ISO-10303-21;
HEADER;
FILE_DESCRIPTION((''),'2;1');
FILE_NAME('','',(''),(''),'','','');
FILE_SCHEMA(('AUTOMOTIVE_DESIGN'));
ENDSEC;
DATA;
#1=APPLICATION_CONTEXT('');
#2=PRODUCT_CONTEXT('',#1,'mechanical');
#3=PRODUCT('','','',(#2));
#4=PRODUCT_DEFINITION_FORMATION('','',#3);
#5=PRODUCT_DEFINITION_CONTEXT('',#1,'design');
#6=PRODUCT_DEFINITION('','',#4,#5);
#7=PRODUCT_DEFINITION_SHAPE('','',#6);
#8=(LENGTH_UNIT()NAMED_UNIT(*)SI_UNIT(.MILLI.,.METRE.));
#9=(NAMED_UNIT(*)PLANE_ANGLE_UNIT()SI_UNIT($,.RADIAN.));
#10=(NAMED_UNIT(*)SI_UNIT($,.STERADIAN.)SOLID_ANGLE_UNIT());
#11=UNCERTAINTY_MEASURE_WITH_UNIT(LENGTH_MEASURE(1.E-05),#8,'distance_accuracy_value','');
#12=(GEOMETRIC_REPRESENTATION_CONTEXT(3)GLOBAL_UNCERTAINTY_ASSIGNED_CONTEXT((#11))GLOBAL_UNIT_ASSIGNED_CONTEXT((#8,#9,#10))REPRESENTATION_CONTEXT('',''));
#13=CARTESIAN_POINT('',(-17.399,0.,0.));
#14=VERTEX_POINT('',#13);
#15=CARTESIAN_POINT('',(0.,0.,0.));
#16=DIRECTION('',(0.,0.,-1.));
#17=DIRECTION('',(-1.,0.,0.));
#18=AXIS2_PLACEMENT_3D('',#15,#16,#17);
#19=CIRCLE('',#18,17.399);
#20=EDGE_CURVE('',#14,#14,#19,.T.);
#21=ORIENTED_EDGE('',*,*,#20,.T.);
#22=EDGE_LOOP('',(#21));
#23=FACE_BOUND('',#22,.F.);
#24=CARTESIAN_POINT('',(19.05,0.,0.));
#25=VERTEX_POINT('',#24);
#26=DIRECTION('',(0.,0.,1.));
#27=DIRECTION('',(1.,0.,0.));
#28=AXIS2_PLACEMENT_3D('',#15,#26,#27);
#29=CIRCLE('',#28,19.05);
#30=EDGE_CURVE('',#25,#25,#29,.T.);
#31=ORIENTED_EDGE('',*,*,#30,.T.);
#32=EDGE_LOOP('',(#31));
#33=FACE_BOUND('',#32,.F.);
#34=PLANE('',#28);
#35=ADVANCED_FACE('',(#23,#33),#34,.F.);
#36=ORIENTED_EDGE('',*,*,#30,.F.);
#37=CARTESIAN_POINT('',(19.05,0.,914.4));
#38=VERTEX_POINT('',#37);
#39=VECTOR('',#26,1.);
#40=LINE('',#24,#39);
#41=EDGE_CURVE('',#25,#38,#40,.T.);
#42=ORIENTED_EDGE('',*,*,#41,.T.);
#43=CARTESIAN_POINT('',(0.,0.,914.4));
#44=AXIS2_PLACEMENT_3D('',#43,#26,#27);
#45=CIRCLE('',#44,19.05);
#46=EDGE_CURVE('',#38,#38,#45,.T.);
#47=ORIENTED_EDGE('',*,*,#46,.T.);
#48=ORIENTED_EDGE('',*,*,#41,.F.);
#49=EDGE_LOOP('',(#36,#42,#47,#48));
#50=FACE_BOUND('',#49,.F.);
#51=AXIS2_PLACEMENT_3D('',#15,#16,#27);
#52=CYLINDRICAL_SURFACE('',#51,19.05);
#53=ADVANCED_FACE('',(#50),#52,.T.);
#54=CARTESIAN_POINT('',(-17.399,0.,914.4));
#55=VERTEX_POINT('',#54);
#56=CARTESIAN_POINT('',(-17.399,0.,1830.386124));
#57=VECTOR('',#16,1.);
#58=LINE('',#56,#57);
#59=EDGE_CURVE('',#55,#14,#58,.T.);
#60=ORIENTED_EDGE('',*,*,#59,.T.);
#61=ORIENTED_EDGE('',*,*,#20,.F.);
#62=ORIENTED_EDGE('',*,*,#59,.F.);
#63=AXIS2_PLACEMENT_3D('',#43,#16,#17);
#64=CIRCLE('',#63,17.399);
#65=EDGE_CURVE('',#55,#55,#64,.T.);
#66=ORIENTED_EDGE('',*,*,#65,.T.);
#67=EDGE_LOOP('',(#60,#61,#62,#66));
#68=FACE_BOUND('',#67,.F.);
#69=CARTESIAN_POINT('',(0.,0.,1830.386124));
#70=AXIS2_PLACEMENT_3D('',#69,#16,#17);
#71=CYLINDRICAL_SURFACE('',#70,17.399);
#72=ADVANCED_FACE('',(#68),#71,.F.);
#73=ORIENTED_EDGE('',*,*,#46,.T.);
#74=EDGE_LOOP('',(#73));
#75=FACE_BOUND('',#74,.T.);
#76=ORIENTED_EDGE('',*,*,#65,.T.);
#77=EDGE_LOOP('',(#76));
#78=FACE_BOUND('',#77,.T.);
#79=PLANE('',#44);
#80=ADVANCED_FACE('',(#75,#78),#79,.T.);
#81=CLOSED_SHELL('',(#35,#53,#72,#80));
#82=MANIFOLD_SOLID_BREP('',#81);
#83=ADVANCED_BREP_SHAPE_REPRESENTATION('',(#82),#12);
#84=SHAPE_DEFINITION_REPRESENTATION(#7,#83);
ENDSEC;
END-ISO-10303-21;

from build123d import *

# Parameters (mm, degrees)
F0_R     = 19.05
F1_DEPTH = 914.4
F3_D     = 34.798


# Not quite as in the source:
# - the program builds the solid bodies; features that only make, move or delete a surface that nothing else refers to are left out


with BuildPart() as f1:
    # F0 (on Top) → F1 (new body)
    with BuildSketch(Plane.XY):
        Circle(F0_R)
    extrude(amount=F1_DEPTH)

    # F3 (through all)
    with Locations(Plane.XY.offset(914.4)):
        with Locations((0, 0)):
            Hole(F3_D / 2)


solid = f1.part
